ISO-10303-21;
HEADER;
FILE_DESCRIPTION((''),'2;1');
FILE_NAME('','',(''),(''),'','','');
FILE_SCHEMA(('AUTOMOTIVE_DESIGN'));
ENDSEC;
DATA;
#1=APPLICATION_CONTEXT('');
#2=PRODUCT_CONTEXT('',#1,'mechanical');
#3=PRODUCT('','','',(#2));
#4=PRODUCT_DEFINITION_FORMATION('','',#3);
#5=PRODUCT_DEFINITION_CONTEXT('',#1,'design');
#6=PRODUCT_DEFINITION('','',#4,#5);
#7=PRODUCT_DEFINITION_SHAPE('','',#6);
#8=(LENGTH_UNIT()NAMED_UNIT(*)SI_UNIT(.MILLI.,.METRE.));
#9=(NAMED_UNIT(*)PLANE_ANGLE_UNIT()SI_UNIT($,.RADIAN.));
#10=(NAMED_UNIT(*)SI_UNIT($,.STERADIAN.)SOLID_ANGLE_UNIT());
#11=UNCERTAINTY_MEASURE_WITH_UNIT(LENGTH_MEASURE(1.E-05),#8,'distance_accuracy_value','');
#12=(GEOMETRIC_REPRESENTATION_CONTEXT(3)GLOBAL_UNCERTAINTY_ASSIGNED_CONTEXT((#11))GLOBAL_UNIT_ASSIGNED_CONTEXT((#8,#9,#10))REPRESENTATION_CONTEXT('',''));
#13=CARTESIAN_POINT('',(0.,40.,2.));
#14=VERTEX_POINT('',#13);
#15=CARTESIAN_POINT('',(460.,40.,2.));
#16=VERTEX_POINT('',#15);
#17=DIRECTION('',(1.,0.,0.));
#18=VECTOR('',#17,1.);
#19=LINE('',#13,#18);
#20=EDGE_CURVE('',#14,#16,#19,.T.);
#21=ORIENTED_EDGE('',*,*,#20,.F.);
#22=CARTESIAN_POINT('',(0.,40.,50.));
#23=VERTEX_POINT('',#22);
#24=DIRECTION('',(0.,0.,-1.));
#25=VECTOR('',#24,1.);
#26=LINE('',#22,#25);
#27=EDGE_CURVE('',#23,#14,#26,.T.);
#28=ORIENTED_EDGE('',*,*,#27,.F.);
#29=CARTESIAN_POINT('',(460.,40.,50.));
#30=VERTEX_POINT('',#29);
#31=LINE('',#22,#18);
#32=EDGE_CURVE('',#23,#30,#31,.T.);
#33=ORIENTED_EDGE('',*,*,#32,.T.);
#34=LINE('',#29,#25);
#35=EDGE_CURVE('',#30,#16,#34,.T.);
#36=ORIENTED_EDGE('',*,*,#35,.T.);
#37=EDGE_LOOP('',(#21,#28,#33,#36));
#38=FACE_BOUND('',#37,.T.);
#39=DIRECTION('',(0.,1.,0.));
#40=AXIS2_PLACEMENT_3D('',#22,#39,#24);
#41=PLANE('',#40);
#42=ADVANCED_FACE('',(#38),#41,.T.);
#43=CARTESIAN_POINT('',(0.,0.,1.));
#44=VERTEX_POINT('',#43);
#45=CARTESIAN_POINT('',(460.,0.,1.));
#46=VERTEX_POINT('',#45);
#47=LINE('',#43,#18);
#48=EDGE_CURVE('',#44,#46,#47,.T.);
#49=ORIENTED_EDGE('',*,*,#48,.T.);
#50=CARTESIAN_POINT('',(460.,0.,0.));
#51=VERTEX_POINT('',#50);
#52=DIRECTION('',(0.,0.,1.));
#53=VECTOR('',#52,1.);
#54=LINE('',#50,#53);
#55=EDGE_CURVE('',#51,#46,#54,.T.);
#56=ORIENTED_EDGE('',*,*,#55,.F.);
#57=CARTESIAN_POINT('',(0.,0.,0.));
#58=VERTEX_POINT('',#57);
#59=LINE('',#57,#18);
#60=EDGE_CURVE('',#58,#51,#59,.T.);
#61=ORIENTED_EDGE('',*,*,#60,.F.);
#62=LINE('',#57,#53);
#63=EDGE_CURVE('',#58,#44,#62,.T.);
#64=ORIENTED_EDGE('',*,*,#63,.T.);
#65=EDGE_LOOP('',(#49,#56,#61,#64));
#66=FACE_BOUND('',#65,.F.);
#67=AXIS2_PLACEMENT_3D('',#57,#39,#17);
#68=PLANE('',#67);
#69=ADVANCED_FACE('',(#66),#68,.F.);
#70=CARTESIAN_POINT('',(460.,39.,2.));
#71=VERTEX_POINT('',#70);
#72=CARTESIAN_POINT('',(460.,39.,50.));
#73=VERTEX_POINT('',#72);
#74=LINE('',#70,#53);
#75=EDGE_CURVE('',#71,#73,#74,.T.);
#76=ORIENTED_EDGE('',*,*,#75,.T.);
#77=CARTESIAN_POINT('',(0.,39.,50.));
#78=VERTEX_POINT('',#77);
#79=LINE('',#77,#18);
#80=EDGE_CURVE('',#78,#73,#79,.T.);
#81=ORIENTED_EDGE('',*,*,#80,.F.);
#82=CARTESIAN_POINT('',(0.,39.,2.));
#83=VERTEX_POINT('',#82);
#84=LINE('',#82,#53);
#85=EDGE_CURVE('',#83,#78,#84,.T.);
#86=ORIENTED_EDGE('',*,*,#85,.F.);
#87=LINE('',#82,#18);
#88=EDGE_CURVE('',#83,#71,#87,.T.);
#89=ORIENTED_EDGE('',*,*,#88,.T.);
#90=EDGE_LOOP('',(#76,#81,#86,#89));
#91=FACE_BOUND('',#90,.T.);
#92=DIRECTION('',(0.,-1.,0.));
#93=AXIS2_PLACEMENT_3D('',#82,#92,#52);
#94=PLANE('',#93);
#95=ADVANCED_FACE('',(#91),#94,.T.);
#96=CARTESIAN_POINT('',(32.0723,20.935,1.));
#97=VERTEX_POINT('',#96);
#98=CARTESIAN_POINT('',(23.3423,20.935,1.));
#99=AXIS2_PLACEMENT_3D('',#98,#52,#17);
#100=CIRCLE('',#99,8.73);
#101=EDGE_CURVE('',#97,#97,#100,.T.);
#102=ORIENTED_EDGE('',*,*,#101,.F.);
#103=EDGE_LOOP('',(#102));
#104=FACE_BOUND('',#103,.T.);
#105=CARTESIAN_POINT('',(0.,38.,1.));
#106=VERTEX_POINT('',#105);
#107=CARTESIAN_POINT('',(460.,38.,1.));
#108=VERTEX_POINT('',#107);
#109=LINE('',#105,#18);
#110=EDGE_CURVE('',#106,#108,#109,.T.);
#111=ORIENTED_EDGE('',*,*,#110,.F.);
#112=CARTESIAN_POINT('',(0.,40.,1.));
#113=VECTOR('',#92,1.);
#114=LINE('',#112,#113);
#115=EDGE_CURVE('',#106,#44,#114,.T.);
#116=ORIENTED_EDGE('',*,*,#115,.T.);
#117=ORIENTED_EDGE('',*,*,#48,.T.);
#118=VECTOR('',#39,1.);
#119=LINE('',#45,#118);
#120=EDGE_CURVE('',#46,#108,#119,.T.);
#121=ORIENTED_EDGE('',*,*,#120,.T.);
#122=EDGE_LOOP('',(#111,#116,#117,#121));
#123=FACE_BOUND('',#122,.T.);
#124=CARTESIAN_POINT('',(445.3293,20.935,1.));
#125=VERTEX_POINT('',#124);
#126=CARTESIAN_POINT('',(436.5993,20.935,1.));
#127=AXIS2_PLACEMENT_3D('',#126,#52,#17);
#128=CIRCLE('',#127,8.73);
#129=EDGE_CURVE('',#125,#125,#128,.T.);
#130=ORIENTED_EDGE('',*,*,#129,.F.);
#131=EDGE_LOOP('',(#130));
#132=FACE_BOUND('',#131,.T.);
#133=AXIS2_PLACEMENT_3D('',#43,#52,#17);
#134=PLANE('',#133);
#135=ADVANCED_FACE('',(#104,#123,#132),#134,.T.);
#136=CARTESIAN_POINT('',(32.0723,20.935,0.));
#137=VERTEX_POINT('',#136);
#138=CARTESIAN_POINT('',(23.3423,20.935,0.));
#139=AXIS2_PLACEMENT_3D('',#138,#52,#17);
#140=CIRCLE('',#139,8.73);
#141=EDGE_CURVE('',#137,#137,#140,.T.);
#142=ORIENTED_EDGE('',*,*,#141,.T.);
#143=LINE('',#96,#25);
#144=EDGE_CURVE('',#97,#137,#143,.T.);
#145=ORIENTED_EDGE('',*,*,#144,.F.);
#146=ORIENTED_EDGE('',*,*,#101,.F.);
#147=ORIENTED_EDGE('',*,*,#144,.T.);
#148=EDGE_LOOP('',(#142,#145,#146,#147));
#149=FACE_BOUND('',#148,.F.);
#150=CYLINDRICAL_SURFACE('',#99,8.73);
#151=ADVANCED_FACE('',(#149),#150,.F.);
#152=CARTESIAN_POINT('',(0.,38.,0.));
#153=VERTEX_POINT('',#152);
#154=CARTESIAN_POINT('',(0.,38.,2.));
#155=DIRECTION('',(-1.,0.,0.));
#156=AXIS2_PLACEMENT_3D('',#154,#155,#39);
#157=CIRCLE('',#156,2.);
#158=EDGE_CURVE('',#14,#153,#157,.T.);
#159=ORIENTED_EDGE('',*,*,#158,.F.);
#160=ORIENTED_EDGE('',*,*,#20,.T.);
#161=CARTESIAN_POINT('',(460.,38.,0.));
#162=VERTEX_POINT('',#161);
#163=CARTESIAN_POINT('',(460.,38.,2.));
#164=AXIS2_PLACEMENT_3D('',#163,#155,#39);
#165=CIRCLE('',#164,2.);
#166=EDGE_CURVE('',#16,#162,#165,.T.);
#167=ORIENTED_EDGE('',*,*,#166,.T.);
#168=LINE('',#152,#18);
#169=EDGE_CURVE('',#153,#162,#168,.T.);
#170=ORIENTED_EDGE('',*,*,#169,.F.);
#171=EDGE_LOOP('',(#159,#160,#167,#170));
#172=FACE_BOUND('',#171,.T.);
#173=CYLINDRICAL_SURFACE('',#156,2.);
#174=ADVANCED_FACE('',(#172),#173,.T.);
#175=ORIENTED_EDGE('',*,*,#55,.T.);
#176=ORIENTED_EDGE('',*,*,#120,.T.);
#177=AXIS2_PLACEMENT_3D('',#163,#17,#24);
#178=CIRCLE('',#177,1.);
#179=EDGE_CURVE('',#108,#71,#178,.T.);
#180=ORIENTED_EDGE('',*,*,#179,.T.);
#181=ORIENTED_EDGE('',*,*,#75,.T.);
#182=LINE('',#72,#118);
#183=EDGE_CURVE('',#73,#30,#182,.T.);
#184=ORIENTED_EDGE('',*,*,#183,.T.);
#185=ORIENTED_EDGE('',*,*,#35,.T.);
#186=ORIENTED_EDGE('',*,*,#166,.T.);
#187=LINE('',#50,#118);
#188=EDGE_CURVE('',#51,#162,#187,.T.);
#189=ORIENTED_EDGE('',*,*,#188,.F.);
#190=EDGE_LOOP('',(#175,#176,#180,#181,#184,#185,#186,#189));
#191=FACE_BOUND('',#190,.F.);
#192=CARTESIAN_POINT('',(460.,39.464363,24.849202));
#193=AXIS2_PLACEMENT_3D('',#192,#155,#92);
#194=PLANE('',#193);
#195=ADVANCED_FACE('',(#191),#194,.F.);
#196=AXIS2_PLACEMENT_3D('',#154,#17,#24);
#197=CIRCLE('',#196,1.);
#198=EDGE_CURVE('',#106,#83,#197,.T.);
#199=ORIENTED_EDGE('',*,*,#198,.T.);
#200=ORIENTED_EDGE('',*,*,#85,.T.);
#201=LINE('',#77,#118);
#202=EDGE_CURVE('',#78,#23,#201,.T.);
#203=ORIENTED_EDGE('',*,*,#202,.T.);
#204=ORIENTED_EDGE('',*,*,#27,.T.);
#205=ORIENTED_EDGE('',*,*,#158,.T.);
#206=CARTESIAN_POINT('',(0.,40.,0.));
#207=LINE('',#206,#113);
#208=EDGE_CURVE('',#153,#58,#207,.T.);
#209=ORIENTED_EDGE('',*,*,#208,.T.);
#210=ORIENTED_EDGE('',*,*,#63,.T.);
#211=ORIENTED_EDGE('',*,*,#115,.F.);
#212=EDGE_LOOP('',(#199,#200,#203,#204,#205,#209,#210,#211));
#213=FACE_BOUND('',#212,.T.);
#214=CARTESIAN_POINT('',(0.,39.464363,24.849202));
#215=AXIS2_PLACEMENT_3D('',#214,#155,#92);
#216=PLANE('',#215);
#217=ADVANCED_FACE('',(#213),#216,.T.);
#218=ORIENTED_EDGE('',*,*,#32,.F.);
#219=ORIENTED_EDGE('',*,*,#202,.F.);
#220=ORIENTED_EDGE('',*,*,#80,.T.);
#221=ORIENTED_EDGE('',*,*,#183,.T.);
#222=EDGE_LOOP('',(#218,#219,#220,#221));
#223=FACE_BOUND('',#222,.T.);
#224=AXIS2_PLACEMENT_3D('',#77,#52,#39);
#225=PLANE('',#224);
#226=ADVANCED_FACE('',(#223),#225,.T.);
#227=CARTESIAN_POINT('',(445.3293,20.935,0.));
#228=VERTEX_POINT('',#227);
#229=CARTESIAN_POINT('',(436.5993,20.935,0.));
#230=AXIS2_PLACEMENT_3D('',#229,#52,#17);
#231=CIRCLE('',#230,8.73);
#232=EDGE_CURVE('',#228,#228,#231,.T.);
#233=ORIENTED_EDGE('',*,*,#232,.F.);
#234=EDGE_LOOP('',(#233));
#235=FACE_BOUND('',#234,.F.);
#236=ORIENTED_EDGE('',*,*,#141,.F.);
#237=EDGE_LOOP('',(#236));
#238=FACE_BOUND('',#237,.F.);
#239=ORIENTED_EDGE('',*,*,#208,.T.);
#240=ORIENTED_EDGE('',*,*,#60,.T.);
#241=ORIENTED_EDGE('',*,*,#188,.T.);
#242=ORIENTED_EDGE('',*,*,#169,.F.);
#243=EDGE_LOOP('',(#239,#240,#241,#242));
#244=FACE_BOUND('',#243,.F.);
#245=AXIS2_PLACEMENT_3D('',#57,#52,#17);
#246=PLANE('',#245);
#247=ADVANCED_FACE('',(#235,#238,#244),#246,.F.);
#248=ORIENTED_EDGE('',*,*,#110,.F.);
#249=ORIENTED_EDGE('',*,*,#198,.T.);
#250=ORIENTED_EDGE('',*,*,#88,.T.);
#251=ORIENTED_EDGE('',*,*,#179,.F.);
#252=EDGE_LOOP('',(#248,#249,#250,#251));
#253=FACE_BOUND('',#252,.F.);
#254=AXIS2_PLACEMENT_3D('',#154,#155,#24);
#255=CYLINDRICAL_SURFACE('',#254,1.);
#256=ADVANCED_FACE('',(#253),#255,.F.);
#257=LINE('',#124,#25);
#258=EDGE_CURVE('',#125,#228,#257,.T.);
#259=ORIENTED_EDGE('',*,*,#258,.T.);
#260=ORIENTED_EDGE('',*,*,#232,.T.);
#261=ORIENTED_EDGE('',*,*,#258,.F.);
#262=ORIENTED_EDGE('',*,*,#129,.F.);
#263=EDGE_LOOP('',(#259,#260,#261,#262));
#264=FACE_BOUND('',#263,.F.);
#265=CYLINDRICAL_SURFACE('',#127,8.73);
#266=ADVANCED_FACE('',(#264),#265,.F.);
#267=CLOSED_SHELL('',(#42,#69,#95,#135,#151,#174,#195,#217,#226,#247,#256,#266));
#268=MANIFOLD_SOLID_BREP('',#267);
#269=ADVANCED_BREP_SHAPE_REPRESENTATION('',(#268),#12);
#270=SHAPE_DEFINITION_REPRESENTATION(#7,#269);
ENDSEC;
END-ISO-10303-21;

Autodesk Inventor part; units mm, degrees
ref_plane "YZ Plane" through (0, 0, 0) normal (1, 0, 0) x (0, 1, 0)
ref_plane "XZ Plane" through (0, 0, 0) normal (0, 1, 0) x (-1, 0, 0)
ref_plane "XY Plane" through (0, 0, 0) normal (0, 0, 1) x (1, 0, 0)
sketch "Boceto1" plane through (0, 0, 0) normal (0, 0, 1) x (1, 0, 0)
  line L0 (0, 0) -> (460, 0)
  line L1 (460, 0) -> (460, 40)
  line L2 (460, 40) -> (0, 40)
  line L3 (0, 40) -> (0, 0)
  dimension "d0" = 460
  dimension "d1" = 40
extrude "Placa1" add sketch "Boceto1" along normal blind 1
sketch "Boceto2" plane through (0, 39, 0) normal (0, 1, 0) x (-1, 0, 0)
  line L0 (-460, 0) -> (0, 0)
  line L1 (0, 0) -> (0, 50)
  line L2 (0, 50) -> (-460, 50)
  line L3 (-460, 50) -> (-460, 0)
edge flange "Pestaña1" height 50 angle 90 thickness 1 bend radius 1 thickness toward (0, 1, 0) relief tear relief width 1 relief depth 0.5 edges at (230, 40, 1) wall of the first edge with corners at (460, 39, 0) (0, 39, 0) (0, 39, 50) (460, 39, 50)
bend "Doblez1"
corner "Esquina1"
sketch "Boceto3" plane through (0, 0, 1) normal (0, 0, 1) x (1, 0, 0)
  circle A0 centre (23.3423, 20.935) radius 8.73
  circle A1 centre (436.5993, 20.935) radius 8.73
  line L0 (0, 0) -> (0, 38) projected
  line L1 (460, 40) -> (0, 40) projected
  dimension "d13" = 413.257
  dimension "d14" = 23.3423
  dimension "d15" = 17.46
  dimension "d16" = 17.46
  dimension "d17" = 19.065
extrude "Extrusión1" cut sketch "Boceto3" against normal blind 10
equation "\"d16\" = d15"
equation "\"d2\" = Grosor"
equation "\"d3\" = Anchura_desahogo_plegado"
equation "\"d4\" = Profundidad_desahogo_plegado"
equation "\"d5\" = Remanente_mínimo"
equation "\"d6\" = Radiodetransición"
equation "\"d9\" = Radio_pliegue"
equation "\"d10\" = Tamaño_destalonado"
equation "\"d11\" = TamañoSeparación"
equation "\"d12\" = Tamaño_de_radio_de_Jacobi"
equation "\"Radio_pliegue\" = Grosor"
equation "\"Anchura_desahogo_plegado\" = Grosor"
equation "\"Profundidad_desahogo_plegado\" = 0.5 * Grosor"
equation "\"Tamaño_destalonado\" = 4 * Grosor"
equation "\"Remanente_mínimo\" = 2 * Grosor"
equation "\"Radiodetransición\" = Radio_pliegue"
equation "\"Tamaño_de_radio_de_Jacobi\" = Radio_pliegue"
equation "\"TamañoSeparación\" = Grosor"
equation "\"Grosor\" = 1"
properties part number "perfil_fijacion"
